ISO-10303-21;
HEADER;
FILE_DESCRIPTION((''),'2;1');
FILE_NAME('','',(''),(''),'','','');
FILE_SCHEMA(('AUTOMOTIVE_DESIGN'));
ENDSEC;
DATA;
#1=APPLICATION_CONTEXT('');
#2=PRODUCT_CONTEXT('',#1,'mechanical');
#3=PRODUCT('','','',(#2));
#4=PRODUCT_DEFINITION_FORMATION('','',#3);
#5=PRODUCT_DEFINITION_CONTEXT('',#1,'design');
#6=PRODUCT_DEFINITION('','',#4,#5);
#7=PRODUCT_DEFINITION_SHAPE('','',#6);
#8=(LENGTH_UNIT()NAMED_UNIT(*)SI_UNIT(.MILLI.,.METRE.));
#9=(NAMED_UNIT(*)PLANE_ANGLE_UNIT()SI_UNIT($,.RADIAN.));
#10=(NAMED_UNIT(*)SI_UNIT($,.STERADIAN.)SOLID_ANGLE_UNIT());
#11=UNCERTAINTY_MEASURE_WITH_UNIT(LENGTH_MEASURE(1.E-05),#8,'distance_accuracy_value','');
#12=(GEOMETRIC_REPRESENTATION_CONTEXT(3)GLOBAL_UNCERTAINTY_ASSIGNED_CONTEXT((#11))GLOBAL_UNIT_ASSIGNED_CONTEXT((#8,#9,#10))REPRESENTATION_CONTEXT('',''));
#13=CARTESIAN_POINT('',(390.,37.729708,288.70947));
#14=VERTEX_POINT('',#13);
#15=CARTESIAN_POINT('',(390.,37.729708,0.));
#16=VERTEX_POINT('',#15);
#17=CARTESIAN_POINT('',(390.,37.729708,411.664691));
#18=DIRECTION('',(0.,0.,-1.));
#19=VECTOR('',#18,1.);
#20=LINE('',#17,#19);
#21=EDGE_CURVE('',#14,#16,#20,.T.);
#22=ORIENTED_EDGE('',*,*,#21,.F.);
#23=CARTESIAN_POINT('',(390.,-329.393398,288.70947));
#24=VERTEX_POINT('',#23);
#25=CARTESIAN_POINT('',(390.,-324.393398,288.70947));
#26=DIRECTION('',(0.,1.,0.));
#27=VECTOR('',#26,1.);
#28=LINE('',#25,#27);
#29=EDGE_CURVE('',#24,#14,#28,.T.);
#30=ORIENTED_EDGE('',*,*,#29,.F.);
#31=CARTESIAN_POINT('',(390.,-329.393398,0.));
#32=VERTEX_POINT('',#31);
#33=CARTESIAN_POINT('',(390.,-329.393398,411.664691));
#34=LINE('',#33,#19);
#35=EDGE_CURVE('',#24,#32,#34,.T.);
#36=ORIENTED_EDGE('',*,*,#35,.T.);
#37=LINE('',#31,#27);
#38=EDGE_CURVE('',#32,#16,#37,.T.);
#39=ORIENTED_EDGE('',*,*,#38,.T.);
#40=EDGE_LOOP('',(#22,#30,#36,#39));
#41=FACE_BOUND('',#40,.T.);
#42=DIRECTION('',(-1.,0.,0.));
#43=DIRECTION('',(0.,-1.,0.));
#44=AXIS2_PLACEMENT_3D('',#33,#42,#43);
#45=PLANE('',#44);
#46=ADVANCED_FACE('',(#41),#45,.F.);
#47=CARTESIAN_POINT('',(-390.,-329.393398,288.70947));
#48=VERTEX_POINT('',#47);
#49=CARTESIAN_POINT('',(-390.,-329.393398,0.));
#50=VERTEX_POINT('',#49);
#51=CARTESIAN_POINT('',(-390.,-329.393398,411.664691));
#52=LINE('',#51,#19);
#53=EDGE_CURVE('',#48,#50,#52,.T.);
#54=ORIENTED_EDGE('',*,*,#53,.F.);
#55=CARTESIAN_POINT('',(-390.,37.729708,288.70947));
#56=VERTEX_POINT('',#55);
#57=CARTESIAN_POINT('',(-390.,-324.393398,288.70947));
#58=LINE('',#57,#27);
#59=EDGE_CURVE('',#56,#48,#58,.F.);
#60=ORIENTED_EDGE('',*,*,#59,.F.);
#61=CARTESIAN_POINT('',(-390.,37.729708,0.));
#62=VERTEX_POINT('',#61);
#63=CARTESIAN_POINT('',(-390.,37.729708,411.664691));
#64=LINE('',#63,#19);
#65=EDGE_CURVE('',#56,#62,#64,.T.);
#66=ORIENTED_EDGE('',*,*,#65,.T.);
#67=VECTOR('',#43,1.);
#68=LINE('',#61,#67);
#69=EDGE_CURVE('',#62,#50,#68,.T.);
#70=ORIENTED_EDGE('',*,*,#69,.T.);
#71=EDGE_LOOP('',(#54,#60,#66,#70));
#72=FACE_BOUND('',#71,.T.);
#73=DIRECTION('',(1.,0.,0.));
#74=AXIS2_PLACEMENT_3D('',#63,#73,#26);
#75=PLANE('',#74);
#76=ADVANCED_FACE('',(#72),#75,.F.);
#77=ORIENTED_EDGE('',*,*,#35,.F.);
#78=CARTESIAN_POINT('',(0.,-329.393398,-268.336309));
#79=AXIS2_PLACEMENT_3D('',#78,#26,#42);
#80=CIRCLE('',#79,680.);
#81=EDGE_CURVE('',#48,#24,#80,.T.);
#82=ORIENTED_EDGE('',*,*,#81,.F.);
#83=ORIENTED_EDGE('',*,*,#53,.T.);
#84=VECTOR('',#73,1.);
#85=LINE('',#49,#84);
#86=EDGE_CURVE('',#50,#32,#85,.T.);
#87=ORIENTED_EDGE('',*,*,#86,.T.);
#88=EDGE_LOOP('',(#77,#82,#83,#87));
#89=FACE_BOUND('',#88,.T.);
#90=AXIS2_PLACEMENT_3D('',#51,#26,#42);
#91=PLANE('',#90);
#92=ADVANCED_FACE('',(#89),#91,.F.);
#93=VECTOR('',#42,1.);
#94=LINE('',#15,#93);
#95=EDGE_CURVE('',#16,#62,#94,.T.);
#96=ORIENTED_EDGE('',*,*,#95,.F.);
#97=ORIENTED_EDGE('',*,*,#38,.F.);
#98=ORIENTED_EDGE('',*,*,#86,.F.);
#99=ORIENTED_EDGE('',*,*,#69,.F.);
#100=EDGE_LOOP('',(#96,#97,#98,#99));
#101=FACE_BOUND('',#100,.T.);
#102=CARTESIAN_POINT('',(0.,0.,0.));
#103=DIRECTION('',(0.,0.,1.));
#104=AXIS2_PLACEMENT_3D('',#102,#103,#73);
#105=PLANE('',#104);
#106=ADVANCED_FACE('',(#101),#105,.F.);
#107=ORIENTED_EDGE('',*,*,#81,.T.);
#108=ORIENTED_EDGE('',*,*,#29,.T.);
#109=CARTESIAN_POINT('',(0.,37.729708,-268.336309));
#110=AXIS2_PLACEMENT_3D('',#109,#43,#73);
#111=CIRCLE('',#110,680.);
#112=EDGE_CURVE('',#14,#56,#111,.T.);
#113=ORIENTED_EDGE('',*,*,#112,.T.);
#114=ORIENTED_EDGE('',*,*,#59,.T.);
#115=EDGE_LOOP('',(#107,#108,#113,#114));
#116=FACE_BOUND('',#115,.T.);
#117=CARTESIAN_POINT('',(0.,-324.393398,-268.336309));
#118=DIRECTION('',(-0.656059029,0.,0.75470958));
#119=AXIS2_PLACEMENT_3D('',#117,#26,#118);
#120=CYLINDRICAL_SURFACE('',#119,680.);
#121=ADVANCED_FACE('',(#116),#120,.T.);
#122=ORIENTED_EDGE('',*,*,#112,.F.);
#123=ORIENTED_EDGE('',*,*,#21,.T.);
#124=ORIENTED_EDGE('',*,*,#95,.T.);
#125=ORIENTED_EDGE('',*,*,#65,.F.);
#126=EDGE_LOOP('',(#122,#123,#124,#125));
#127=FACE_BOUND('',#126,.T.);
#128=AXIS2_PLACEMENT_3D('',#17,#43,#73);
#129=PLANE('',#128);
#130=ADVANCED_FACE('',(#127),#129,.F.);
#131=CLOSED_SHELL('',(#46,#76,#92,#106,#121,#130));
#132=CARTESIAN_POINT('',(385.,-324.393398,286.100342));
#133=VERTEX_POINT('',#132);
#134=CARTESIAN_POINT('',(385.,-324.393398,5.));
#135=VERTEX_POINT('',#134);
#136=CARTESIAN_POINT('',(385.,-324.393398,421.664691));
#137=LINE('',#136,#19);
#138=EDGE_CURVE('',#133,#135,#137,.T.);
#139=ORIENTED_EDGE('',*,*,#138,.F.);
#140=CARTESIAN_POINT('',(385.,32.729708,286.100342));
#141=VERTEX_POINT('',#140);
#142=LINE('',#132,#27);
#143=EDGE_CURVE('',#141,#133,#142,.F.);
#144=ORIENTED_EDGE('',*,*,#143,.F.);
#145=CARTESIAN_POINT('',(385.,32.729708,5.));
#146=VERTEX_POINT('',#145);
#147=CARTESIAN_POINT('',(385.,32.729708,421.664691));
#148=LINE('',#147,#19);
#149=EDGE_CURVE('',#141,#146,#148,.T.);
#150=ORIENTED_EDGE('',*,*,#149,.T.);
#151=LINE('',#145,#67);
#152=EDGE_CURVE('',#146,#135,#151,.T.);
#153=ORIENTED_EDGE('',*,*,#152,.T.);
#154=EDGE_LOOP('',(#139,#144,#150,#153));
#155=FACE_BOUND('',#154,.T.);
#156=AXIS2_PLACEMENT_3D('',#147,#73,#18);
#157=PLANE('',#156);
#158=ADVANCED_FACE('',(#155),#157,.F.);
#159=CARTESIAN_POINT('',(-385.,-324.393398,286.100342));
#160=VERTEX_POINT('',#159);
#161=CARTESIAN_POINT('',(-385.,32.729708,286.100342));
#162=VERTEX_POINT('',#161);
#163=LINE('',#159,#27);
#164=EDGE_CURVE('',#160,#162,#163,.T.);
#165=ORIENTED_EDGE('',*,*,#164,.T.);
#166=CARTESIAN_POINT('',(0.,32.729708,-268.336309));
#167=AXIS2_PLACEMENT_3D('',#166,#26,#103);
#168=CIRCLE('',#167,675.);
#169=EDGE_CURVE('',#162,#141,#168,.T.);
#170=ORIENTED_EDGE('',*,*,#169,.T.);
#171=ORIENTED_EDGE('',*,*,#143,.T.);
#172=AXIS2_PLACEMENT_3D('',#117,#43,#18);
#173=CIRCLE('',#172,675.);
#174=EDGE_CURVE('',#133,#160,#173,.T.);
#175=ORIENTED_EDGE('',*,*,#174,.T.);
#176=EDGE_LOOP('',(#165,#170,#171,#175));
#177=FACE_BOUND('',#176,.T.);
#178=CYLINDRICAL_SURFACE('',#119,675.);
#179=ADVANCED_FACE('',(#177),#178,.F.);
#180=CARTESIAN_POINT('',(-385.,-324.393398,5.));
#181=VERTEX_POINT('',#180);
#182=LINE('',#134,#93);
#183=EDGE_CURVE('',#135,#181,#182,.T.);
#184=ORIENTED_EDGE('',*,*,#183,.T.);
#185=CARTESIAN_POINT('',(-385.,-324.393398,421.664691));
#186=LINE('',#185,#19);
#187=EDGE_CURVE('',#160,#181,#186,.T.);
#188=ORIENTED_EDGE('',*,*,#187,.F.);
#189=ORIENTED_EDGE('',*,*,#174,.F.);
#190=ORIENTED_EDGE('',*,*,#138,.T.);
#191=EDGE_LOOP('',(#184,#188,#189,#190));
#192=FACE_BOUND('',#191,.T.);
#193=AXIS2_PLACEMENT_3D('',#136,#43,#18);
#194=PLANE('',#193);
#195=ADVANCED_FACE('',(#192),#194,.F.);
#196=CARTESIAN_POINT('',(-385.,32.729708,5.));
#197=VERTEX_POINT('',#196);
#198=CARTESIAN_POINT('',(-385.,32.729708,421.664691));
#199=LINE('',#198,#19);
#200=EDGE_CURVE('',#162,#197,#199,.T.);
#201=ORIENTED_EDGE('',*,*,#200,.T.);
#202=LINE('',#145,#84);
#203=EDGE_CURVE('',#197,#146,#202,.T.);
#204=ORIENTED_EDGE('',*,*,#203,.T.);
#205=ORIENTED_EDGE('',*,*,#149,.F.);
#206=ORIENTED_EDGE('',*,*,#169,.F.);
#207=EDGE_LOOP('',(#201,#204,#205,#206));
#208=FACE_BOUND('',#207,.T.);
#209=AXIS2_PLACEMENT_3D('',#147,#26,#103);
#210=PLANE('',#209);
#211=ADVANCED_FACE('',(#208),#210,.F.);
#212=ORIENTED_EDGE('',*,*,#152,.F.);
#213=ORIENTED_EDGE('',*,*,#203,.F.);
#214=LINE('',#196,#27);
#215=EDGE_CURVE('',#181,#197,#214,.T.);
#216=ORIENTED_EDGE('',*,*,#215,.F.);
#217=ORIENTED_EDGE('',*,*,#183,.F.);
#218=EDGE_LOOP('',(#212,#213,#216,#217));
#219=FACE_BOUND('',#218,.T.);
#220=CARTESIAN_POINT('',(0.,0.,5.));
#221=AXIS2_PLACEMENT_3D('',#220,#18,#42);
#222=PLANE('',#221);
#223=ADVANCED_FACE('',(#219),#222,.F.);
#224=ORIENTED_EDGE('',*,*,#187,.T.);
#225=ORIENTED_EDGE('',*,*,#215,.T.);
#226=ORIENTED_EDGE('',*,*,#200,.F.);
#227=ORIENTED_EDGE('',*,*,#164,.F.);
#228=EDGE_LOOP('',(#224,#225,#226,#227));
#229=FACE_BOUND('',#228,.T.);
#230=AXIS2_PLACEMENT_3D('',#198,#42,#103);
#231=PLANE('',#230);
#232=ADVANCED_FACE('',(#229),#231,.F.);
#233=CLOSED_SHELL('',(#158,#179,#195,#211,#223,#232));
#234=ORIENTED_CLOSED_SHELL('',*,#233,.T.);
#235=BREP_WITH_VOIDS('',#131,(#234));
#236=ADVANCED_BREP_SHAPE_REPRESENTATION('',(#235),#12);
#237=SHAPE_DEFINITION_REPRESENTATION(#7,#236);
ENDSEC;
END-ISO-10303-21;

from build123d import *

# Parameters (mm, degrees)
EXTRUDE_START            = -329.393398282
EXTRUDE_1_DEPTH          = 367.123106012
CUT_EXTRUDE_2_REACH      = 654.668
CUT_EXTRUDE_2_END_RADIUS = 675
SKETCH_4_W               = 770
SKETCH_4_H               = 357.123106012


# Read off the part's stored shape, not the designer's step: 凸台-拉伸1
with BuildPart() as part:
    # 凸台-拉伸1 outline → 凸台-拉伸1 (new body)
    with BuildSketch(Plane(origin=(0, 0, 0), x_dir=(1, 0, 0), z_dir=(0, 1, 0)).offset(EXTRUDE_START)):
        with BuildLine():
            Line((390, -288.70946964), (390, 0))
            Line((390, 0), (-390, 0))
            Line((-390, 0), (-390, -288.70946964))
            ThreePointArc((-390, -288.70946964), (0, -411.663690552), (390, -288.70946964))
        make_face()
    extrude(amount=EXTRUDE_1_DEPTH)

    # 切除-拉伸2: up to this cylinder (the profile starts inside it)
    cut_extrude_2_end = Plane(origin=(0, -145.831845, -268.336309448), z_dir=(0, 1, 0)) * Cylinder(CUT_EXTRUDE_2_END_RADIUS, 2660.336, mode=Mode.PRIVATE)
    # 草图4 → 切除-拉伸2 (cut, up to the surface)
    with BuildSketch(Plane(origin=(0, 0, 5), x_dir=(-1, 0, 0), z_dir=(0, 0, -1)), mode=Mode.PRIVATE) as cut_extrude_2_sk1:
        with Locations((0, -145.831845276)):
            Rectangle(SKETCH_4_W, SKETCH_4_H)
    cut_extrude_2_tool1 = extrude(cut_extrude_2_sk1.sketch, amount=-CUT_EXTRUDE_2_REACH, mode=Mode.PRIVATE) & cut_extrude_2_end
    add(cut_extrude_2_tool1.solids().sort_by_distance((0, -145.831845, 5))[0], mode=Mode.SUBTRACT)


solid = part.part
